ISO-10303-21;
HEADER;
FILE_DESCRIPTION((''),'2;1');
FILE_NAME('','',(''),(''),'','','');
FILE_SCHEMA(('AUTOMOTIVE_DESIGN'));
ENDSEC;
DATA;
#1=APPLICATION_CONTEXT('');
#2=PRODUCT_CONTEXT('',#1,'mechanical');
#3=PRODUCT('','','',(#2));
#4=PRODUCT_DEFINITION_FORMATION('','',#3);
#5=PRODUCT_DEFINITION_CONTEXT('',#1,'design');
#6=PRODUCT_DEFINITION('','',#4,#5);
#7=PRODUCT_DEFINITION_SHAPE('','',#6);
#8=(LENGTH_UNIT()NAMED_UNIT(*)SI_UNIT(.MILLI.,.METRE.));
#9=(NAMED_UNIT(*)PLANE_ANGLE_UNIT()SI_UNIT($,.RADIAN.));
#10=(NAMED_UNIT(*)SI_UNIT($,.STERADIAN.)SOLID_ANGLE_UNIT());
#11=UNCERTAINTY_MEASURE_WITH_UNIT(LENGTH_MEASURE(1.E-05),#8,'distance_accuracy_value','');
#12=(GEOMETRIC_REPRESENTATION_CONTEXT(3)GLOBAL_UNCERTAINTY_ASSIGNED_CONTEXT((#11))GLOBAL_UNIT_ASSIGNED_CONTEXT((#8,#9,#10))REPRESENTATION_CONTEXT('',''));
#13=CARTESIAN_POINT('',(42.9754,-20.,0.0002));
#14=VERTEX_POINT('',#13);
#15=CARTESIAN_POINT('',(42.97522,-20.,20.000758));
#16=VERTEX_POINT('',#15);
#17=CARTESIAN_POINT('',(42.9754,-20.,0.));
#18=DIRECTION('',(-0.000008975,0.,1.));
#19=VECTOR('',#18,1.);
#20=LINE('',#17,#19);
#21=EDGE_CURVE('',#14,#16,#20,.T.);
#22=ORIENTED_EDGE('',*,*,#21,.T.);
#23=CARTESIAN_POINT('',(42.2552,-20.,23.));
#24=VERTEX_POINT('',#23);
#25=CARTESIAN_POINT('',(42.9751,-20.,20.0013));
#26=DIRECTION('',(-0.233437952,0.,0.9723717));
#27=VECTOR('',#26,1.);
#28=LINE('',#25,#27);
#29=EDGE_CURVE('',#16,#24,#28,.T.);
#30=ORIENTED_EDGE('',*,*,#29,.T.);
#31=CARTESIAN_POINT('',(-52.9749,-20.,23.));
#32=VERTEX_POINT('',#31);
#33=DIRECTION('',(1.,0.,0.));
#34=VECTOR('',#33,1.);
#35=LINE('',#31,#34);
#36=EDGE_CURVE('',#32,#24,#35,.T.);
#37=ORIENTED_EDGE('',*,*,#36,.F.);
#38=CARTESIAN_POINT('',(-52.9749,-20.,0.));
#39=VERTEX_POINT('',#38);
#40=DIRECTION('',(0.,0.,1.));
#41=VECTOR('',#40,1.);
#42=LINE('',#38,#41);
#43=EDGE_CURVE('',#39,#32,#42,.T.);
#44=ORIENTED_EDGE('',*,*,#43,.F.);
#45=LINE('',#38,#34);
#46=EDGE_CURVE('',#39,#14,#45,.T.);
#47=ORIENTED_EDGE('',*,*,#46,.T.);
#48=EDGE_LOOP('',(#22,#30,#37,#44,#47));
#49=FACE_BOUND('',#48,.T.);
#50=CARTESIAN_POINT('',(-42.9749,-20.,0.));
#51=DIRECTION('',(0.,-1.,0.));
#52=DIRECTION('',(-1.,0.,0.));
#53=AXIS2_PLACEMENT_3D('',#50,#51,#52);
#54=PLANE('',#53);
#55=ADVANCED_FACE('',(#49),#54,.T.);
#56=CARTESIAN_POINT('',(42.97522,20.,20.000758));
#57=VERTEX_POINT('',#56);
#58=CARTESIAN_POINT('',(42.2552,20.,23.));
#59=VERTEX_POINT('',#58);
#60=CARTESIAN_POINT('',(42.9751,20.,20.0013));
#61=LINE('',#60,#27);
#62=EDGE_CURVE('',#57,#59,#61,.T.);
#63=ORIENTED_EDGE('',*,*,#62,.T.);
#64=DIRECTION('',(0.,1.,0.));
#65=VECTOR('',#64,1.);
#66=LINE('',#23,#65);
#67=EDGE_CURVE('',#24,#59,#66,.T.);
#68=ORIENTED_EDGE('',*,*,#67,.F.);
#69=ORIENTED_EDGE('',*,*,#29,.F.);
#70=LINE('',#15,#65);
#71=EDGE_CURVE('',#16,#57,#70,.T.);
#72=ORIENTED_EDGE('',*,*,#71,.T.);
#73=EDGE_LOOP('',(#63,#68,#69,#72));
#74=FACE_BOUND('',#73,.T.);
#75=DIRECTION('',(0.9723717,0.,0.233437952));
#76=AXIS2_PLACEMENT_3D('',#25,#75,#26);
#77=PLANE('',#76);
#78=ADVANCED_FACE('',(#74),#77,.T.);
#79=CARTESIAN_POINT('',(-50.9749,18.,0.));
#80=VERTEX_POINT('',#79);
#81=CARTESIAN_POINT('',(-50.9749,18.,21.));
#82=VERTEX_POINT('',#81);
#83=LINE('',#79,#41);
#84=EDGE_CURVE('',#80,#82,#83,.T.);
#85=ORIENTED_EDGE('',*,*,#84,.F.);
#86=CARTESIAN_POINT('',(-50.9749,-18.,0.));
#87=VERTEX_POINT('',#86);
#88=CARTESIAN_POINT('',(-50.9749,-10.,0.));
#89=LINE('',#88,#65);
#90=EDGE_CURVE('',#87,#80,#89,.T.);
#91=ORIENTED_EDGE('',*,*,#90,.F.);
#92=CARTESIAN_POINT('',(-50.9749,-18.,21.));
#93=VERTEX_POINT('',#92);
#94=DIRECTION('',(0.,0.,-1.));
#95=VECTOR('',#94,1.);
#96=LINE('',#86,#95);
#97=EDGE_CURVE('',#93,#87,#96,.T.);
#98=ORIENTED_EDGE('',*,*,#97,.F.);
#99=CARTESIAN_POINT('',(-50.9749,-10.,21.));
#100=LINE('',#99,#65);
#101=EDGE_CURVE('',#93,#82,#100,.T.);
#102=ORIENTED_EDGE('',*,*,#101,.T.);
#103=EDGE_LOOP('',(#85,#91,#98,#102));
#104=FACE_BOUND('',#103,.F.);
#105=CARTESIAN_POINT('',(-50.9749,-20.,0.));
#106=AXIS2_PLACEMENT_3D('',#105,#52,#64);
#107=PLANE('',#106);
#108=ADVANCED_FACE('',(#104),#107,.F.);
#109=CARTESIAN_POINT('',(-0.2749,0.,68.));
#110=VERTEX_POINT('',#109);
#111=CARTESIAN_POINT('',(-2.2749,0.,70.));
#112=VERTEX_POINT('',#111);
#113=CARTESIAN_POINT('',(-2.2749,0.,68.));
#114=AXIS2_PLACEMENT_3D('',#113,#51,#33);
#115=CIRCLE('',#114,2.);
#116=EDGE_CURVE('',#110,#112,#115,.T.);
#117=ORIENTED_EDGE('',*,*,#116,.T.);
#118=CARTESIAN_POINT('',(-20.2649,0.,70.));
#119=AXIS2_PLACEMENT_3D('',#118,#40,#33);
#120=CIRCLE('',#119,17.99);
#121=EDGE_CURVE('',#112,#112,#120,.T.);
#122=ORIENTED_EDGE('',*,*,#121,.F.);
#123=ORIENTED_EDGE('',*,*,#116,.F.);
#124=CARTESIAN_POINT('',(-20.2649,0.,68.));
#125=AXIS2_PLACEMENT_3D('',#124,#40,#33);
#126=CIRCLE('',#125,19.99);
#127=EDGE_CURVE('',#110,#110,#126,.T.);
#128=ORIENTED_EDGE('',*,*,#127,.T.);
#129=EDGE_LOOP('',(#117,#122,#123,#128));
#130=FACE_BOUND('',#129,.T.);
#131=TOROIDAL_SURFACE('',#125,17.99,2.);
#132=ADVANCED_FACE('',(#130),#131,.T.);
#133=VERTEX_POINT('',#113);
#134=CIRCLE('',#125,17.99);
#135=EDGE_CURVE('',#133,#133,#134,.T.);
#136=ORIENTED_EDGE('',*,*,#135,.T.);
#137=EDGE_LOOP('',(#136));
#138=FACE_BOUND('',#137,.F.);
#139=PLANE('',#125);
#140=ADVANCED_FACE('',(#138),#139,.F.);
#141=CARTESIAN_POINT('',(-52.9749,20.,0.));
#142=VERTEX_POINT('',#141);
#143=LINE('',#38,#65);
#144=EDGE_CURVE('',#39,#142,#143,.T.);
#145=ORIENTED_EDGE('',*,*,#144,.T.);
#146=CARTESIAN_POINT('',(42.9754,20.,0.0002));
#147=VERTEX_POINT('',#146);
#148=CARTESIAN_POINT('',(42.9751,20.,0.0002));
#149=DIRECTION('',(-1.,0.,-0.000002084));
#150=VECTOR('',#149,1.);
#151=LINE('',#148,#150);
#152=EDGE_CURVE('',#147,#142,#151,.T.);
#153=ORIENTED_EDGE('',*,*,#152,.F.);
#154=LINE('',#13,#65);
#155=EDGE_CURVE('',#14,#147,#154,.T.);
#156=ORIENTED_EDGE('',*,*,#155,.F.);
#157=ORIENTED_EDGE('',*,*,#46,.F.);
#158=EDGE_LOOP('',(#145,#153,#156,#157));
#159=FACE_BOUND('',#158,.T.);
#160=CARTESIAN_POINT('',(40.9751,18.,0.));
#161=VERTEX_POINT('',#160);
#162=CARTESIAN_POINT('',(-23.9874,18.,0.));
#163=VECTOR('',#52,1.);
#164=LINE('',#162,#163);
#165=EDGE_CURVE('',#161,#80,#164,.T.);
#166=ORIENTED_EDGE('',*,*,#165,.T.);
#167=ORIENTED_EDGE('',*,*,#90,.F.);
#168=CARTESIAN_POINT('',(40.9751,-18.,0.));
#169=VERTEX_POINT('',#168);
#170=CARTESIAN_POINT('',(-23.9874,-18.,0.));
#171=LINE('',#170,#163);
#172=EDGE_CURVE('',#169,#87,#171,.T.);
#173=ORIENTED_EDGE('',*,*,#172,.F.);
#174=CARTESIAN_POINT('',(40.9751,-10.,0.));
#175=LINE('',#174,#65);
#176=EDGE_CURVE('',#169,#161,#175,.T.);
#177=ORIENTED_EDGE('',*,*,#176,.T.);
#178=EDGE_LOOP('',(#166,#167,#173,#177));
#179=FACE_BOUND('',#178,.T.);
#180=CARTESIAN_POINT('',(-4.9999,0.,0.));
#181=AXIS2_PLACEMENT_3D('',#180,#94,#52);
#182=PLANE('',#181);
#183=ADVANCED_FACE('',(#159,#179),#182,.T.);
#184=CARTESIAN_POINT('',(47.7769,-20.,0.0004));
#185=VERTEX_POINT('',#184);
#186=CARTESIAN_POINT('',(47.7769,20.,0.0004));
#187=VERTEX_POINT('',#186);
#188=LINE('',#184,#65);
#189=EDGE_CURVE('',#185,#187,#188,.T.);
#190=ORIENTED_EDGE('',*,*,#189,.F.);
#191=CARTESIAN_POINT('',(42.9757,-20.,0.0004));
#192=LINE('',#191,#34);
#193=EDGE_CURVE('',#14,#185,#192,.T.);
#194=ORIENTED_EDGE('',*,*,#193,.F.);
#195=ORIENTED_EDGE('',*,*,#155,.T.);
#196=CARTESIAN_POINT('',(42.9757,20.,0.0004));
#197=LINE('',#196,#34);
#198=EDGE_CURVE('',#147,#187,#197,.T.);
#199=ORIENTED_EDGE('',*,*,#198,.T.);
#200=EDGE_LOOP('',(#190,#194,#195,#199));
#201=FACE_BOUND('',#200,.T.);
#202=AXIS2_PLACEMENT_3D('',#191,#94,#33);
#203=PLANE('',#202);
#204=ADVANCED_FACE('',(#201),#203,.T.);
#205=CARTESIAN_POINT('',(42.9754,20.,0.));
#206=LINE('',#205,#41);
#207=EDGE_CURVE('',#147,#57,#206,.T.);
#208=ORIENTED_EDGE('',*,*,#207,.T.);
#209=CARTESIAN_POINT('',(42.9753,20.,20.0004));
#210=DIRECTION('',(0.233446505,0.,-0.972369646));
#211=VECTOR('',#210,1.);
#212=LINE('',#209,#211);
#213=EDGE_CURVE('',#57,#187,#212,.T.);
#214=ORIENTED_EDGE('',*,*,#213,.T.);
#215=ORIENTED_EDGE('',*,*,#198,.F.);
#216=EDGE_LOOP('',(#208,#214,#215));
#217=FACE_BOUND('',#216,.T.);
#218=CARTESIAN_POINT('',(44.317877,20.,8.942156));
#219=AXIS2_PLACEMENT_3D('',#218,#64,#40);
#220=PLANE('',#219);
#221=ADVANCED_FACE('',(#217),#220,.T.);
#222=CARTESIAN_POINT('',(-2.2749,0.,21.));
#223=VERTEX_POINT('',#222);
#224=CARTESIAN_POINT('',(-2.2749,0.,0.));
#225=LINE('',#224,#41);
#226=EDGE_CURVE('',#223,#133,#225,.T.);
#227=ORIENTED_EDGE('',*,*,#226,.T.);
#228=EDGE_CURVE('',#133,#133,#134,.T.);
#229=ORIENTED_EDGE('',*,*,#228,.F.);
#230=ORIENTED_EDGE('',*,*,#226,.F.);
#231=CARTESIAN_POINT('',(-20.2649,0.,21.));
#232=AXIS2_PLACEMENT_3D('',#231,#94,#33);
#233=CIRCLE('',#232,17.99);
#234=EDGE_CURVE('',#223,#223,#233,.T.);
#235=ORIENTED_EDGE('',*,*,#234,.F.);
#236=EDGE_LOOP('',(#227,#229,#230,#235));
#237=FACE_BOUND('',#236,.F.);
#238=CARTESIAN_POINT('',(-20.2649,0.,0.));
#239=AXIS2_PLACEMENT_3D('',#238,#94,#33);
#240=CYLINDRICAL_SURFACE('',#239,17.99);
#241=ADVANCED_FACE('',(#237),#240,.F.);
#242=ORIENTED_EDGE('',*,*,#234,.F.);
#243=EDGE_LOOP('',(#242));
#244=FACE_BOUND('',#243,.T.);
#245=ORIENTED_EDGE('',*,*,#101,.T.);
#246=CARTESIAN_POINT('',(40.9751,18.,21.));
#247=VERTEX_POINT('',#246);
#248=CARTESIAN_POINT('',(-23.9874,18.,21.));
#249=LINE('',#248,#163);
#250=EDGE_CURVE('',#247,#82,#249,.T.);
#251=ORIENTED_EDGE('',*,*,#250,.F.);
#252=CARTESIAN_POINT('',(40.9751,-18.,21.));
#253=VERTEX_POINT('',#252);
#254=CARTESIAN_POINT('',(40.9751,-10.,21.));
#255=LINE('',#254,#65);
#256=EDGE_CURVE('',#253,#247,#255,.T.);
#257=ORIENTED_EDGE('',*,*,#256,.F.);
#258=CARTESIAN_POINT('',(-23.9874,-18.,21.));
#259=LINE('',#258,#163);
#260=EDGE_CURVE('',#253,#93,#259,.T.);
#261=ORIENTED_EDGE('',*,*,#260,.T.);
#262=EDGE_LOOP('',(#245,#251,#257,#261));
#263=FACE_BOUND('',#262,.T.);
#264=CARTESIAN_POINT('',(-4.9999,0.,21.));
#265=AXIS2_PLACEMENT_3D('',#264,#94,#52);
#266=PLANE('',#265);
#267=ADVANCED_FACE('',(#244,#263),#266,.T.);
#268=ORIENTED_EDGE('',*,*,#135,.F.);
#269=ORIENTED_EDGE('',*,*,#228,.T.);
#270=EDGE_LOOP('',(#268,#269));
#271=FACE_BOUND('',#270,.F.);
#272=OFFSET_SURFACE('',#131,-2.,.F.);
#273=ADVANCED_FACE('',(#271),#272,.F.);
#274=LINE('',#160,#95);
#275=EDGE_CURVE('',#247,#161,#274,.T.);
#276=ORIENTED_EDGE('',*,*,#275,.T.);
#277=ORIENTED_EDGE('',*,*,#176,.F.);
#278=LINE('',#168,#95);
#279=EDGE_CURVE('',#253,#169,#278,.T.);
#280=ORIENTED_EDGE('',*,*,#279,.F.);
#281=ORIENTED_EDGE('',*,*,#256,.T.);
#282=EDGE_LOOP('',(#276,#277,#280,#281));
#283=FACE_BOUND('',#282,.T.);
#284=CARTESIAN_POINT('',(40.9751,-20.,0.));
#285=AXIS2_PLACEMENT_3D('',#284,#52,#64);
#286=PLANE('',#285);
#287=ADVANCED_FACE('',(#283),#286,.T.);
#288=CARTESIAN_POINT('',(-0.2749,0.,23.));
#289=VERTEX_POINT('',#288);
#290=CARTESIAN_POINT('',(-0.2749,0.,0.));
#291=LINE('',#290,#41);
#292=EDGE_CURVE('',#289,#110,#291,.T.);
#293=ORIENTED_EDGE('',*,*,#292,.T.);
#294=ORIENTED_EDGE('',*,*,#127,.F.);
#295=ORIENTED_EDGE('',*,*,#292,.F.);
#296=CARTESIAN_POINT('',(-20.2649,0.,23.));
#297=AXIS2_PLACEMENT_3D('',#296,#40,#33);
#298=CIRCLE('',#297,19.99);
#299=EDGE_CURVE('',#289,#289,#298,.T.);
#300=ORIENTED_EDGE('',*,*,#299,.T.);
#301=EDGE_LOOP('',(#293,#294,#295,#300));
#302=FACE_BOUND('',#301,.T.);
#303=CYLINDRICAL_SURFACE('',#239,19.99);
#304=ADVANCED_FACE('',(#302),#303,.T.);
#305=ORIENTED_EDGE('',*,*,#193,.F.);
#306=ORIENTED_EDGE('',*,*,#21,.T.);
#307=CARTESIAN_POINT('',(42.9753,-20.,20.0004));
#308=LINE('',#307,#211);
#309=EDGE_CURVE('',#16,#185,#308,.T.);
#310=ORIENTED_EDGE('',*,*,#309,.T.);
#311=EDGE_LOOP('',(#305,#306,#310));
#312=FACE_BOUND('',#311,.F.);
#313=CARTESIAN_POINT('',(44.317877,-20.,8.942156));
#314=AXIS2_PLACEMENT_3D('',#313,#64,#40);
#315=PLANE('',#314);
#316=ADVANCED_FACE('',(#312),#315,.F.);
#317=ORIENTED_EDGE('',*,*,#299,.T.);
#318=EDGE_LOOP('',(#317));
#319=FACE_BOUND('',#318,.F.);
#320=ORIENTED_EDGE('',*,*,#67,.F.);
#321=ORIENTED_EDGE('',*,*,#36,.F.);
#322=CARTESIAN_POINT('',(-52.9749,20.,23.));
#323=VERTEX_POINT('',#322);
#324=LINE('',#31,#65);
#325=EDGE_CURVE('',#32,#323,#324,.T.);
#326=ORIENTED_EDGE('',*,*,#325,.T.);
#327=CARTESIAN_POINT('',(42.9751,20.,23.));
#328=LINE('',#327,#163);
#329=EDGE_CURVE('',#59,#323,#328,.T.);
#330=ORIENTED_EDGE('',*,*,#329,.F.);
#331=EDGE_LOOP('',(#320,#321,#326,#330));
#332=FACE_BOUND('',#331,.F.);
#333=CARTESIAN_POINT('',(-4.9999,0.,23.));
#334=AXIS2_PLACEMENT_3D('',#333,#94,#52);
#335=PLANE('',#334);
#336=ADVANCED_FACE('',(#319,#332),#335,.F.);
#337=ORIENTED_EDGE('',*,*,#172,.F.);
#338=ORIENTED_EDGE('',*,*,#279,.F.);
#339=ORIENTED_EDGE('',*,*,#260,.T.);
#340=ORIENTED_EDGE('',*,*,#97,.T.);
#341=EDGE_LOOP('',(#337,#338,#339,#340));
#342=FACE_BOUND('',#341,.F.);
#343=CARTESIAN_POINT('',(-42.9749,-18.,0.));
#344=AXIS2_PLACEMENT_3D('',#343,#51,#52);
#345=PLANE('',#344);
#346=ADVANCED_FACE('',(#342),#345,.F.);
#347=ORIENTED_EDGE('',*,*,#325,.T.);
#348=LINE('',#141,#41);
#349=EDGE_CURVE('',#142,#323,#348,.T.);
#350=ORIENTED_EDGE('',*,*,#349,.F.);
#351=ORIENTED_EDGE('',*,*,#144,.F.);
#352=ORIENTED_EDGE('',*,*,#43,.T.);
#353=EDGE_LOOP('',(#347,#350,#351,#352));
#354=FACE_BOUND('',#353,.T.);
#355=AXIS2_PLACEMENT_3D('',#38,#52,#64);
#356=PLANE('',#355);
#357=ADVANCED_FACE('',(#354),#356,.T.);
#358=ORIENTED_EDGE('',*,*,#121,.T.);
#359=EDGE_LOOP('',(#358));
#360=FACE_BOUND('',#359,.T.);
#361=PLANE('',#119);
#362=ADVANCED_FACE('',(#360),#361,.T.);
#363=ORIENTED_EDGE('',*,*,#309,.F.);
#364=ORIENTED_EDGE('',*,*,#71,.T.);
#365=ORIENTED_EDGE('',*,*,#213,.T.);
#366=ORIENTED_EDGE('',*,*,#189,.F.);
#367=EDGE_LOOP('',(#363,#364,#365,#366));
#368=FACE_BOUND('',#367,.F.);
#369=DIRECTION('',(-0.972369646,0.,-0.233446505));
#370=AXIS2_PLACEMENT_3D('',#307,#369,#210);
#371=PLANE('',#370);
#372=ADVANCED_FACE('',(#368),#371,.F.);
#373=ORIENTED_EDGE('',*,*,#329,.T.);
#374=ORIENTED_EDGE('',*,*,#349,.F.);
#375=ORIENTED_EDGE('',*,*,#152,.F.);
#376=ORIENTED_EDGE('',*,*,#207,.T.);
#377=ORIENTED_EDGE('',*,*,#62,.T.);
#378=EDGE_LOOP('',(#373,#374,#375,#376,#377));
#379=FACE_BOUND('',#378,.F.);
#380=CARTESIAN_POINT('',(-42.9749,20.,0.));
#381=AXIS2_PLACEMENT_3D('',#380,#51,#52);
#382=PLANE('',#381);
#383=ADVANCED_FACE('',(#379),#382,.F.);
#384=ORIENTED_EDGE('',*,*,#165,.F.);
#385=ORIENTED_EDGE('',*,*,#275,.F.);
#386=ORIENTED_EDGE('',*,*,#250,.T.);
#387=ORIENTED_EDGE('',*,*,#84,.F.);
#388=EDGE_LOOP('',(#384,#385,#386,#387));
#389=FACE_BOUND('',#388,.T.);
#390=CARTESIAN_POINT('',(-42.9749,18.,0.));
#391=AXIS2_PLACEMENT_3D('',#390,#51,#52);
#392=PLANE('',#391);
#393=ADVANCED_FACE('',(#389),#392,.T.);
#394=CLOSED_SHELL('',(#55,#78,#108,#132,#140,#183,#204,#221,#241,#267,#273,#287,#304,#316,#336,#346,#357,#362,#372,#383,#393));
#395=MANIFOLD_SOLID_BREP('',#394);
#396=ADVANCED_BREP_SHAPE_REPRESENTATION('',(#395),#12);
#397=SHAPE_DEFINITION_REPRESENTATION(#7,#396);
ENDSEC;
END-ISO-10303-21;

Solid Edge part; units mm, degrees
sketch "Sketch1" plane through (0, 0, 0) normal (0, 0, 1) x (1, 0, 0)
  circle A0 centre (-20.2649, 0) radius 19.99
extrude "Protrusion1" add sketch "Sketch1" along normal blind 70
fillet "Round_1" radius 2 1 edges at (-40.2549, 0, 70)
sketch "Sketch2" plane through (0, 0, 0) normal (0, 0, 1) x (1, 0, 0)
  circle A0 centre (-20.2649, 0) radius 19.99
  line L0 (-42.9749, -20) -> (-52.9749, -20)
  line L1 (-52.9749, -20) -> (-52.9749, 20)
  line L2 (-42.9749, 20) -> (-52.9749, 20)
  line L3 (42.9751, 20) -> (-42.9749, 20)
  line L4 (42.9751, -20) -> (42.9751, 20)
  line L5 (-42.9749, -20) -> (42.9751, -20)
extrude "ExtrudedProtrusion_2" add sketch "Sketch2" along normal blind 23
shell "Thinwall_4" thickness 2 removed faces 1 at (27.9429, -12.9333, 0)
sketch "Sketch3" plane through (0.0001, -20, 10) normal (0, -1, 0) x (1, 0, 0)
  line L0 (42.9752, 10.0004) -> (47.7768, -9.9996)
  line L1 (42.9756, -9.9996) -> (47.7768, -9.9996)
  line L2 (42.9752, 10.0004) -> (42.9756, -9.9996)
extrude "ExtrudedProtrusion_5" add sketch "Sketch3" against normal blind 40
sketch "Sketch4" plane through (0.0001, -20, 10) normal (0, -1, 0) x (1, 0, 0)
  line L0 (42.975, 10.0013) -> (42.2551, 13)
  line L1 (42.2551, 13) -> (42.975, 13)
  line L2 (42.975, 13) -> (42.975, 10.0013)
extrude "ExtrudedCutout_2" cut sketch "Sketch4" against normal blind 40
